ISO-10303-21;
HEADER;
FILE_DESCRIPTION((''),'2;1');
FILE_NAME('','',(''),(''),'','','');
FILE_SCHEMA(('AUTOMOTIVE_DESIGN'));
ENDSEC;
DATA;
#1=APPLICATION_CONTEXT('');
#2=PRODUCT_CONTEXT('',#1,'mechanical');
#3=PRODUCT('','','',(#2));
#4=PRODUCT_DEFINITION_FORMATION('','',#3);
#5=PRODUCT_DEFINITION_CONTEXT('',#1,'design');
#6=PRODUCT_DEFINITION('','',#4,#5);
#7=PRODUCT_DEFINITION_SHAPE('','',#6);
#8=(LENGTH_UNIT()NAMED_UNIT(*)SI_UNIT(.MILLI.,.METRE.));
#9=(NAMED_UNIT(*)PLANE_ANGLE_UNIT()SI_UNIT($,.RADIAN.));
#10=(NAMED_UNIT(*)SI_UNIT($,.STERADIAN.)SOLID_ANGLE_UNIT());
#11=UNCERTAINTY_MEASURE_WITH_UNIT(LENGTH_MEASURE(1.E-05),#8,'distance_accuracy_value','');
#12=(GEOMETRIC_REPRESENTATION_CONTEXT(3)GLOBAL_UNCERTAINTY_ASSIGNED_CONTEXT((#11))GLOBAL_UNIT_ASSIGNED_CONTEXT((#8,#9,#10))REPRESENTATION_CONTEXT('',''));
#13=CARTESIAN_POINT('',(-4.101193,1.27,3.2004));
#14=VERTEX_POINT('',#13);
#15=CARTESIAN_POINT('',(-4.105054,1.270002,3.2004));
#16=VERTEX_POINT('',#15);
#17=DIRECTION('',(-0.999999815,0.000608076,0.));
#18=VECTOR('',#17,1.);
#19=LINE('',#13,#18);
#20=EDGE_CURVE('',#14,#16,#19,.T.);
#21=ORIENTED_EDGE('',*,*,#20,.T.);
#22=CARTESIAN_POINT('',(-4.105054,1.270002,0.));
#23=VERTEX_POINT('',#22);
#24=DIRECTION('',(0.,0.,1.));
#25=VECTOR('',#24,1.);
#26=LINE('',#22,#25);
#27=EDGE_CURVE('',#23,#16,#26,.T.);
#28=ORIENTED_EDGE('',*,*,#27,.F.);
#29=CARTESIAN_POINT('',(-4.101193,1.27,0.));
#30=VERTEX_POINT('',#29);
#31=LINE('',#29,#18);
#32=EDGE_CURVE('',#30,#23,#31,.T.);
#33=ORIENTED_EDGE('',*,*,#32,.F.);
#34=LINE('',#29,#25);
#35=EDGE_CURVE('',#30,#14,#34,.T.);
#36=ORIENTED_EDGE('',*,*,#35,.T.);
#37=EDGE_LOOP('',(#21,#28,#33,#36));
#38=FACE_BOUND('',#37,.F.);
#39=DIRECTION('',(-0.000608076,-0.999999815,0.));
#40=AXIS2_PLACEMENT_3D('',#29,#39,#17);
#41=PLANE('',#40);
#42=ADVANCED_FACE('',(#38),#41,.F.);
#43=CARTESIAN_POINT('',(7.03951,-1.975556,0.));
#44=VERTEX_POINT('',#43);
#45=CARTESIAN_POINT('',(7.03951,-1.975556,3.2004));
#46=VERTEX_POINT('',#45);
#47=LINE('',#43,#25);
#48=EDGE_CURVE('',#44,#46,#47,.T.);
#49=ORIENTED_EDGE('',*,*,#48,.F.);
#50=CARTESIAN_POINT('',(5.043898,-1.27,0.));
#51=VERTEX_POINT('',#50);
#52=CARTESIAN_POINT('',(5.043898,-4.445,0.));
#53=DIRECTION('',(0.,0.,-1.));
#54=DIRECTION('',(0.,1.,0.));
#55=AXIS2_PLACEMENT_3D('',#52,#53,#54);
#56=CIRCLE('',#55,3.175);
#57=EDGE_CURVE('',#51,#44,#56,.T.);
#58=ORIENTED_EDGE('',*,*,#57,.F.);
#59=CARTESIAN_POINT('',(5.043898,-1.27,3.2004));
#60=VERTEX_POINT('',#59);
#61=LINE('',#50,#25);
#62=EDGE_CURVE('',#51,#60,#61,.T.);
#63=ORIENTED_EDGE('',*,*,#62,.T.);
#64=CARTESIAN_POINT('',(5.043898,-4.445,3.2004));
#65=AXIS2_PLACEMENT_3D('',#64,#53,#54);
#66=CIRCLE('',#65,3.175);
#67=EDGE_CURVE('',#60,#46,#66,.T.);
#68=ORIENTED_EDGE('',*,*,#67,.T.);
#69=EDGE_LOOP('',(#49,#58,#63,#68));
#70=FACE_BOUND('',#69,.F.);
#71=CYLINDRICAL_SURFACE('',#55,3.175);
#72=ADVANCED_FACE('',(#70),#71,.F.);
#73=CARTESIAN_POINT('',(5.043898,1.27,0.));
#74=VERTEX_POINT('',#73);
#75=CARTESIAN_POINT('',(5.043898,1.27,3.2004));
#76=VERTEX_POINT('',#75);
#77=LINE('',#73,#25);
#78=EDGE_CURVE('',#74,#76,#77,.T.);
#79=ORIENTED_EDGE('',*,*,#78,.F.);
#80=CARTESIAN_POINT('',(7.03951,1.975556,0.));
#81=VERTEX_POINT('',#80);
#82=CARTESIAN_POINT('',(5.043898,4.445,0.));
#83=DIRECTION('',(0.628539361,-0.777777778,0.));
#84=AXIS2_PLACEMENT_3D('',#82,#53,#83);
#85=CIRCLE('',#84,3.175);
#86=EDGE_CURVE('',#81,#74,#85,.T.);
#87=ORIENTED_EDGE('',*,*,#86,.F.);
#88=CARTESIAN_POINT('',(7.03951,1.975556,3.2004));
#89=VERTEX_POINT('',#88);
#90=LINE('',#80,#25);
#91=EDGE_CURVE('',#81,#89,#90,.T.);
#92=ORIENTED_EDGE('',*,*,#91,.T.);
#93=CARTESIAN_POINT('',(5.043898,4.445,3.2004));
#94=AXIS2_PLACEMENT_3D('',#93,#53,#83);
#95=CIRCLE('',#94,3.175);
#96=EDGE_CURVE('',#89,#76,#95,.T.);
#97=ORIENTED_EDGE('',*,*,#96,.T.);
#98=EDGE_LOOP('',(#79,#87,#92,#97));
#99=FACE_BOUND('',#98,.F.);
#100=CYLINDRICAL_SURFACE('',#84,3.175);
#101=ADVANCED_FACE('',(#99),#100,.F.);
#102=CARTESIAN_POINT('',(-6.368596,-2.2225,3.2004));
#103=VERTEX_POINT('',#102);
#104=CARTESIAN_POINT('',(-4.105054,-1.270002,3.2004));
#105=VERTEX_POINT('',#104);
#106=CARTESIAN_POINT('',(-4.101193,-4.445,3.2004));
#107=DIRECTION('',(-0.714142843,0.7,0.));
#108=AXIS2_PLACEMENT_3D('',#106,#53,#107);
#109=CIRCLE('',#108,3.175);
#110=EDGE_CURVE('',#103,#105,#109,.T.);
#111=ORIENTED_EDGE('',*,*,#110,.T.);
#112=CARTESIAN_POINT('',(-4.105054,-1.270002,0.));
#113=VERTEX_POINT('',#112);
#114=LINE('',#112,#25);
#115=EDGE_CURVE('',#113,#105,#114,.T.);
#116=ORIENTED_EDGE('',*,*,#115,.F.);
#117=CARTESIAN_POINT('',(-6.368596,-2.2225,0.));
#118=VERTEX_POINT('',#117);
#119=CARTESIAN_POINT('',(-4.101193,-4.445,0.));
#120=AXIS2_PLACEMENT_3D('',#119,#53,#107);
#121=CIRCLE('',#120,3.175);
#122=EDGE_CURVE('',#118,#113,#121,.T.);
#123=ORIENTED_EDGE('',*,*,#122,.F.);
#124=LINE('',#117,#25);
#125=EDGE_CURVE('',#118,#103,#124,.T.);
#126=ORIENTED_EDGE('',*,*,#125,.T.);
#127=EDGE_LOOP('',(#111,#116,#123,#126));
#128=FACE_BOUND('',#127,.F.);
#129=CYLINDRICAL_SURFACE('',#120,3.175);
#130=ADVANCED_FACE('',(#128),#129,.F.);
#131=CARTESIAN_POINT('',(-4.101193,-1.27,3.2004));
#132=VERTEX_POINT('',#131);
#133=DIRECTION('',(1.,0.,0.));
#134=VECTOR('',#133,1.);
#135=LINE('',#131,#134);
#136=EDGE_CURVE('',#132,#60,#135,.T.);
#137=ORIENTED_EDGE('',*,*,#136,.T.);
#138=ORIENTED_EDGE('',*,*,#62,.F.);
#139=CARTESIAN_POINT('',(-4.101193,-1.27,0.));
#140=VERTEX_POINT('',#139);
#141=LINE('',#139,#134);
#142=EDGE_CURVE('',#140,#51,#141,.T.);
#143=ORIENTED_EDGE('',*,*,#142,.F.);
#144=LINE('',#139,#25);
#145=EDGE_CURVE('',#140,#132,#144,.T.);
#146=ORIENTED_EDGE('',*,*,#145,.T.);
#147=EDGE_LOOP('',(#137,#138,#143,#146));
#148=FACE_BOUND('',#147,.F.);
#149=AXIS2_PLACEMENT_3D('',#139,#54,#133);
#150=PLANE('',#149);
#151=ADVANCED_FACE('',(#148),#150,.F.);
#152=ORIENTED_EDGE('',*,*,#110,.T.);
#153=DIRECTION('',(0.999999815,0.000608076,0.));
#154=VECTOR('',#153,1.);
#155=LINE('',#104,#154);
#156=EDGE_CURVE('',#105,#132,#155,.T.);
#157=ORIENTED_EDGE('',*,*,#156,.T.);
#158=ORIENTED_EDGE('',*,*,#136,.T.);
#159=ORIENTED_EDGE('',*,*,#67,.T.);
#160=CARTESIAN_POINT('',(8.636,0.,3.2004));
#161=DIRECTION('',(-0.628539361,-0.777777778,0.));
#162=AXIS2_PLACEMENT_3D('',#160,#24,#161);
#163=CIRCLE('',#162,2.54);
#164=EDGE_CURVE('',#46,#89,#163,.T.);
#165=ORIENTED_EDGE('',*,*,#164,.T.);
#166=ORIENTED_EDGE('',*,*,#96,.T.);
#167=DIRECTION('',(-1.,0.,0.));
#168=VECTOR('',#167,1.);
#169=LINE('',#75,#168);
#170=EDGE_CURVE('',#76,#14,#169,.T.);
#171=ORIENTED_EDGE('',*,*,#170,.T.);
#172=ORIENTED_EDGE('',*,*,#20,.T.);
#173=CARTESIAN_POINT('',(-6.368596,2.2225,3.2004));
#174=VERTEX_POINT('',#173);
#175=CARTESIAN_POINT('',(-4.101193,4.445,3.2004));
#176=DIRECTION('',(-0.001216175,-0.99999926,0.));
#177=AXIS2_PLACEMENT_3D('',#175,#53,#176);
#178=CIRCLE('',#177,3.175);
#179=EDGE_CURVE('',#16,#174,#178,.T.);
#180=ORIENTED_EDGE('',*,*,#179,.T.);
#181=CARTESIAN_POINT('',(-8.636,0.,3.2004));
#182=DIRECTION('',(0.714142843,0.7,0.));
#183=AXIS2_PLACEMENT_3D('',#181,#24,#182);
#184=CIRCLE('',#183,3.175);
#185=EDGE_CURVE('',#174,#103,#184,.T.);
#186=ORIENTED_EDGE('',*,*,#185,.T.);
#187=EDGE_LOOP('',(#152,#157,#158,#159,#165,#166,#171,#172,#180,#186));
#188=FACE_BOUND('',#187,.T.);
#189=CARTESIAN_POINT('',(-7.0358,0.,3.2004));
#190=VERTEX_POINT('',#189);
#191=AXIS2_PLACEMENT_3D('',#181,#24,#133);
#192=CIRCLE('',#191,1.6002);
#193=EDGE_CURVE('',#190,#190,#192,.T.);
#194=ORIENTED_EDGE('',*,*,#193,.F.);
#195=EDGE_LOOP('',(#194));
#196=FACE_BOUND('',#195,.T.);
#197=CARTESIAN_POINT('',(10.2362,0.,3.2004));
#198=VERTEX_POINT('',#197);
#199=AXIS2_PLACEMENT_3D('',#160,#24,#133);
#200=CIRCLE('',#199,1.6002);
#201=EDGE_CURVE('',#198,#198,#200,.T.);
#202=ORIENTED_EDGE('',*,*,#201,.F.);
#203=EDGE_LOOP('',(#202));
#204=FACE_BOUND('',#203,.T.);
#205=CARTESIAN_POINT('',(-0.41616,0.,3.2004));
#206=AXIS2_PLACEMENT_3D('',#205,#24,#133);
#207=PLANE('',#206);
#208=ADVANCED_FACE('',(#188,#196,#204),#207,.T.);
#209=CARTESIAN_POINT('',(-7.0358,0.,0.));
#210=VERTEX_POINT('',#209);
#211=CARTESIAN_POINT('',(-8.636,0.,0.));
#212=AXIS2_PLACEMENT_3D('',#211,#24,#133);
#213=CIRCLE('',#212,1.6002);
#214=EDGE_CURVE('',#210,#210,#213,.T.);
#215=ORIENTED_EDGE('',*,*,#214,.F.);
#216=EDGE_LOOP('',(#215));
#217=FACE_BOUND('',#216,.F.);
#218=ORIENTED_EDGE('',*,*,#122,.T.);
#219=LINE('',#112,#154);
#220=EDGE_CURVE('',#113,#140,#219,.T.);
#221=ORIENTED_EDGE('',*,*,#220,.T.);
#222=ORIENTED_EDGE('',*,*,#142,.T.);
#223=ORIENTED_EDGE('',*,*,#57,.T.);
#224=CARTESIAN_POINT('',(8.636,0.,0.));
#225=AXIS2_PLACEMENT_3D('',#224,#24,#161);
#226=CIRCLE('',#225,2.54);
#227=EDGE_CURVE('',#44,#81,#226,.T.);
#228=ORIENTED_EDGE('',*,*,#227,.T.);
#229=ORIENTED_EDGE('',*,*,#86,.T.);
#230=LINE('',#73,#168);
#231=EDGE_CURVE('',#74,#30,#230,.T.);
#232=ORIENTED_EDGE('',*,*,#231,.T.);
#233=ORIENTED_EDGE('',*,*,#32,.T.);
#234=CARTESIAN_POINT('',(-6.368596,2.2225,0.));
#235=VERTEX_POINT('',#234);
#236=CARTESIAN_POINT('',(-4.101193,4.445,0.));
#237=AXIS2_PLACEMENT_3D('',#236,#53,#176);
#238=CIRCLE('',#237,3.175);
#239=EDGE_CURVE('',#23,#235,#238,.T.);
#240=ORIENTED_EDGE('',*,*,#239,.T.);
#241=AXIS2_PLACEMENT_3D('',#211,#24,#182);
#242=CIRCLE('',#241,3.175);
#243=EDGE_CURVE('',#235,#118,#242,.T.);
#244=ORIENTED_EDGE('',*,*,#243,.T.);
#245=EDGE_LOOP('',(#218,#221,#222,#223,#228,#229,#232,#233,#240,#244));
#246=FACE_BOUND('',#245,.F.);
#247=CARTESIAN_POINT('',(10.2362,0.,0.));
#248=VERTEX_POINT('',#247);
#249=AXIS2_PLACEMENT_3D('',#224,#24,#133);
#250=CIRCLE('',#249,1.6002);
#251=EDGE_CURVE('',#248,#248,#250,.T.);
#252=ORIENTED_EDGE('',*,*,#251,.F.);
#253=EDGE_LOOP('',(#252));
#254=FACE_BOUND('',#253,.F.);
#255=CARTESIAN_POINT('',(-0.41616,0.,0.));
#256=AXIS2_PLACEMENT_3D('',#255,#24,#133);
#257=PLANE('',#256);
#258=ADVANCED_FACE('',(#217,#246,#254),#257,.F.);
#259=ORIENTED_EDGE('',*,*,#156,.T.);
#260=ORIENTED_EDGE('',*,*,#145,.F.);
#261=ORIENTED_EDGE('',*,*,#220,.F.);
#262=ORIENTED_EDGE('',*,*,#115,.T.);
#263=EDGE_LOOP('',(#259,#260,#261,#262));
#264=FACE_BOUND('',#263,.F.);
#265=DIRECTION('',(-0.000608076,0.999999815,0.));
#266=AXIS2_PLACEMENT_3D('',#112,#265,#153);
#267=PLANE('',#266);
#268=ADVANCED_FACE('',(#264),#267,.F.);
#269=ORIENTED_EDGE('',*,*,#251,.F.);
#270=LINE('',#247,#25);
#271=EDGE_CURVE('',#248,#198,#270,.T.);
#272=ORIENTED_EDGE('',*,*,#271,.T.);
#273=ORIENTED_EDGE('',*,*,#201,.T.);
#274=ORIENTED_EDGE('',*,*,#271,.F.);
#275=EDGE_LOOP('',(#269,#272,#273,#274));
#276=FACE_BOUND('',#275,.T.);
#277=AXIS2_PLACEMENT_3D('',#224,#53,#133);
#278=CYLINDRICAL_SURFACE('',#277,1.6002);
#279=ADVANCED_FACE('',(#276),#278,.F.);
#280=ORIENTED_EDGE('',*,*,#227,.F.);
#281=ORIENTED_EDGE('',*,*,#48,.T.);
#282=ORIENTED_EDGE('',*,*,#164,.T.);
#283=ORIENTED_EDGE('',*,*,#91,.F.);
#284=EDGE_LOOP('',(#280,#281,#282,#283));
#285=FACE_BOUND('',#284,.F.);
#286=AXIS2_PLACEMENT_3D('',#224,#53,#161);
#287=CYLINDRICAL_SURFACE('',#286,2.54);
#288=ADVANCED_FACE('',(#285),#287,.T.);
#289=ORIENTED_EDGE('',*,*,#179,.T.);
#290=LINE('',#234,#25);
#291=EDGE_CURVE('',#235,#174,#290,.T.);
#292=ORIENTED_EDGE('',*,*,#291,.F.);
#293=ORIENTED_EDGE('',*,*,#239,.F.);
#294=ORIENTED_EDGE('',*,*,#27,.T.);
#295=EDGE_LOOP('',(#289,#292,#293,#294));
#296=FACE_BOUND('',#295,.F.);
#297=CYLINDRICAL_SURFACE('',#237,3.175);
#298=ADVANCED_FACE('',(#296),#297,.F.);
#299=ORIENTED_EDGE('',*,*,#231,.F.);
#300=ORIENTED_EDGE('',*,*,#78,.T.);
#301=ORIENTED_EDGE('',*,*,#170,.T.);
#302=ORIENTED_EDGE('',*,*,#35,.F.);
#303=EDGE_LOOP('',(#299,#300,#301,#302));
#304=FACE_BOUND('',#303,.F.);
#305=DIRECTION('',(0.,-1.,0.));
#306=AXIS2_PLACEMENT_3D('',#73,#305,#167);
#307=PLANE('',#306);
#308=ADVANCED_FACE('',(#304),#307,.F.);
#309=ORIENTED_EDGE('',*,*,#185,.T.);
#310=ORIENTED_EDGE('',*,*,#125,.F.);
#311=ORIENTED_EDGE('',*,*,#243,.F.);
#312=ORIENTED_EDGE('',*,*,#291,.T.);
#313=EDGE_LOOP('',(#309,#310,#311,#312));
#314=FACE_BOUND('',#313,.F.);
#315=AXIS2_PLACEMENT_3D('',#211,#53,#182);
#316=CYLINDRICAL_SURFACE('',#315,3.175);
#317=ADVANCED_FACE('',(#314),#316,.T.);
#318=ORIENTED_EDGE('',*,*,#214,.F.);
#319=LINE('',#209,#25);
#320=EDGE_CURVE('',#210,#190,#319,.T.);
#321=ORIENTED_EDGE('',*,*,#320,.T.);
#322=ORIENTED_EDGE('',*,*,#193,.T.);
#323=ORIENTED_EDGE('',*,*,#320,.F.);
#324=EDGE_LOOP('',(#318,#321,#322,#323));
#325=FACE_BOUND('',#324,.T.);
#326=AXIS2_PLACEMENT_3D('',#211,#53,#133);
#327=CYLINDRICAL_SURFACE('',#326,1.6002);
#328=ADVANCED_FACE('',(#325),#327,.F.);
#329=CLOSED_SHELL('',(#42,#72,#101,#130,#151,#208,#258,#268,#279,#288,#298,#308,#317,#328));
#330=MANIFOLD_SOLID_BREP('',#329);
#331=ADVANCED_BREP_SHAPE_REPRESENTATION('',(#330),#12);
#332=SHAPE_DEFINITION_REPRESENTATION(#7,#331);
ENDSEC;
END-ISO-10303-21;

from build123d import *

# Parameters (mm, degrees)
F0_R     = 1.6002
F1_DEPTH = 3.2004


# Not quite as in the source:
# - ends of sketch curves that miss each other by under 0.0002 mm in the source are joined


with BuildPart() as f1:
    # F0 (on Top) → F1 (new body)
    with BuildSketch(Plane.XY):
        with BuildLine():
            ThreePointArc((-4.1050543049, 1.270002348), (-5.3326449309, 1.5185429247), (-6.3685964739, 2.2225))
            ThreePointArc((-6.3685964739, 2.2225), (-11.811, 0), (-6.3685964739, -2.2225))
            ThreePointArc((-6.3685964739, -2.2225), (-5.3326449309, -1.5185429247), (-4.1050543049, -1.270002348))
            Line((-4.1050543049, -1.270002348), (-4.1011929479, -1.27))
            Line((-4.1011929479, -1.27), (5.0438975516, -1.27))
            ThreePointArc((5.0438975516, -1.27), (6.1022308849, -1.451581293), (7.0395100229, -1.9755555556))
            ThreePointArc((7.0395100229, -1.9755555556), (11.176, 0), (7.0395100229, 1.9755555556))
            ThreePointArc((7.0395100229, 1.9755555556), (6.1022308849, 1.451581293), (5.0438975516, 1.27))
            Line((5.0438975516, 1.27), (-4.1011929479, 1.27))
            Line((-4.1011929479, 1.27), (-4.1050543049, 1.270002348))
        make_face()
        with Locations((-8.636, 0)):
            Circle(F0_R, mode=Mode.SUBTRACT)
        with Locations((8.636, 0)):
            Circle(F0_R, mode=Mode.SUBTRACT)
    extrude(amount=F1_DEPTH)


solid = f1.part
